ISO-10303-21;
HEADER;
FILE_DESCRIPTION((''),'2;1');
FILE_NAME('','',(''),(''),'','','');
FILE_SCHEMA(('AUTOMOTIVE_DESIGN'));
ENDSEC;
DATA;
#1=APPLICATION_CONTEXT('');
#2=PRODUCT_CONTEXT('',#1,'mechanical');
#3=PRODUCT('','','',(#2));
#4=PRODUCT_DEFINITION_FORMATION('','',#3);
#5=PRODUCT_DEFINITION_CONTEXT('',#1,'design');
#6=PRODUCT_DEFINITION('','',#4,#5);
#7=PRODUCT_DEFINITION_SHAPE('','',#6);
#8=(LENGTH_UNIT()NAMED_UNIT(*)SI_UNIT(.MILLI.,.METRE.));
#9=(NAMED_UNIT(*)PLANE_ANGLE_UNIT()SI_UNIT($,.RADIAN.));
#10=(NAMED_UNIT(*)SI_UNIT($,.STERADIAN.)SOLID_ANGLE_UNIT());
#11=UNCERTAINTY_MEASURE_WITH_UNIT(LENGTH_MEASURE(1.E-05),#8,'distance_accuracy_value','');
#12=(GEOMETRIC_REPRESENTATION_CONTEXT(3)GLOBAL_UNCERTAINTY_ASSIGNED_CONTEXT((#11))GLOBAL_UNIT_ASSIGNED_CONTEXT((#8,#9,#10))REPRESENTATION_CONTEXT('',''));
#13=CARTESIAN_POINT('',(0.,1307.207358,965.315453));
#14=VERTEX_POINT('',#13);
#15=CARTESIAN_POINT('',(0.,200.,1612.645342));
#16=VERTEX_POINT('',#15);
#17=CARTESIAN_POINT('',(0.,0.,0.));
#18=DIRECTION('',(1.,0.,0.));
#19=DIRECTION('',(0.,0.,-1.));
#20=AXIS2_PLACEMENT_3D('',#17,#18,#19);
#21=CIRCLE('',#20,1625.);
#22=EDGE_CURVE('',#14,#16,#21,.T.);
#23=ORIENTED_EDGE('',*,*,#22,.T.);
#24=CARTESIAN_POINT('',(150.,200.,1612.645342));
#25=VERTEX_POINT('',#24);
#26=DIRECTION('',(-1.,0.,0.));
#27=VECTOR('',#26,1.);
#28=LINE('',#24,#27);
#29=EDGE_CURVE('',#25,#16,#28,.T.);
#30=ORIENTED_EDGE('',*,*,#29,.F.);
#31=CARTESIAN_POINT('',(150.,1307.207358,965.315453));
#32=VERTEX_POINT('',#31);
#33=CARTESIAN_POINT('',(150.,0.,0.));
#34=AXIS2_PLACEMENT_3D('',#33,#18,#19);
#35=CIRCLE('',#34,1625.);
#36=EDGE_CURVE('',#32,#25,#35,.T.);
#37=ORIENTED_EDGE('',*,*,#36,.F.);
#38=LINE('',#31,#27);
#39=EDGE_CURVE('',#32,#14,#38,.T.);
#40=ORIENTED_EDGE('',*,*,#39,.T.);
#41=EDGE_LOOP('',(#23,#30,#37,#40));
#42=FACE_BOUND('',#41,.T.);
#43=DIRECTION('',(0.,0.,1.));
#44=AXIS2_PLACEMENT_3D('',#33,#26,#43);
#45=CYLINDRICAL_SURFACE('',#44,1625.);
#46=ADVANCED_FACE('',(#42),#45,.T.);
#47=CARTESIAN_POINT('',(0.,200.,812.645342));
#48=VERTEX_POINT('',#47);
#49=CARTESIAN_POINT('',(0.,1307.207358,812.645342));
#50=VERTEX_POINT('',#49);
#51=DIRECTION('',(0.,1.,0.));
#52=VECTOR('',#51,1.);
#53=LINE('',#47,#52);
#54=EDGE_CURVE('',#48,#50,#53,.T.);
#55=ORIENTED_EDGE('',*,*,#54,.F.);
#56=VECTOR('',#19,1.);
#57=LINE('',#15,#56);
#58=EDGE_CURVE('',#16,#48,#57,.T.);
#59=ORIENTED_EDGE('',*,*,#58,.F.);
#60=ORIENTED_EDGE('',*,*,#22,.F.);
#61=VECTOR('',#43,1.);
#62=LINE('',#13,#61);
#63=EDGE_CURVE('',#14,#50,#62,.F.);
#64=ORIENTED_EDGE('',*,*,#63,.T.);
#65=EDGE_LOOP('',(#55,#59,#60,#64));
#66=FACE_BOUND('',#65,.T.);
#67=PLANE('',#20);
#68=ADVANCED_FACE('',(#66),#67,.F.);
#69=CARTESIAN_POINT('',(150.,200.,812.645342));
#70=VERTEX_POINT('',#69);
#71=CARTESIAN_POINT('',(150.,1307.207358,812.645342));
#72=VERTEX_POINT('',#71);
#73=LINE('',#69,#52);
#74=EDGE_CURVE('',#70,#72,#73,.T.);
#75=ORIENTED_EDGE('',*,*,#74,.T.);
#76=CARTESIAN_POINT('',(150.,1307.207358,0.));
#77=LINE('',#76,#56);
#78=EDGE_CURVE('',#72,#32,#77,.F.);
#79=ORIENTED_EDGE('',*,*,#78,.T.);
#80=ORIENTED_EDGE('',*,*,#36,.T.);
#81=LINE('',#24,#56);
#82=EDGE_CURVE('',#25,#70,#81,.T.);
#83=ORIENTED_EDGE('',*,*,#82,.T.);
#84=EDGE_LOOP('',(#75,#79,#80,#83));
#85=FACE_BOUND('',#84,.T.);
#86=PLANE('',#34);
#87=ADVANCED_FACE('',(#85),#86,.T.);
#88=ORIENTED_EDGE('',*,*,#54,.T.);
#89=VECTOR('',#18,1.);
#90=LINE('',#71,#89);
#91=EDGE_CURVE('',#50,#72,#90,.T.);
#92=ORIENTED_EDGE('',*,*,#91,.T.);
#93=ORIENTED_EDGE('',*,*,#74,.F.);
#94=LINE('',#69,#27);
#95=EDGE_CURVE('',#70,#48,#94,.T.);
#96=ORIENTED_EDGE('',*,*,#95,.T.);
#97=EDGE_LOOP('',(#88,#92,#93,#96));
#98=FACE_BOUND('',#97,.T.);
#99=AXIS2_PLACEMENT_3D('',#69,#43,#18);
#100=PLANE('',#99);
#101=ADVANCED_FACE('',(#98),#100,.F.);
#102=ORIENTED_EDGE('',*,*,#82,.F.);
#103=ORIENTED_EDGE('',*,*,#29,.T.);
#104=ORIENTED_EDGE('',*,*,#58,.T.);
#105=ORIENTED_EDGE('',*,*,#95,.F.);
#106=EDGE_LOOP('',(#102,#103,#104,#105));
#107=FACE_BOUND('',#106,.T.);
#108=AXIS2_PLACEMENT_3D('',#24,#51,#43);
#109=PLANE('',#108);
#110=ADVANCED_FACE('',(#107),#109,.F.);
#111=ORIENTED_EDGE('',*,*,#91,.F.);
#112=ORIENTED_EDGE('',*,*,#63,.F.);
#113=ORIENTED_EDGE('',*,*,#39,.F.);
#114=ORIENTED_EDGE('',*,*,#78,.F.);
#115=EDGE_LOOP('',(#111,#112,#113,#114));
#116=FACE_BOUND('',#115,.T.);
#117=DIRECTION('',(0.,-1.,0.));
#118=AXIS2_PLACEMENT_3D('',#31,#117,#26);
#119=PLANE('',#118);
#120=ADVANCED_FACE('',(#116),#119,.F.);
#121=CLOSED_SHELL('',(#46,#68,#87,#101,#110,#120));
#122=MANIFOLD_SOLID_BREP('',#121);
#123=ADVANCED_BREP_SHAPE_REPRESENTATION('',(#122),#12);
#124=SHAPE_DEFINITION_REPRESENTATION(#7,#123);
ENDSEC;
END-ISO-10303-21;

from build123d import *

# Parameters (mm, degrees)
EXTRUDE_1_DEPTH     = 150
CHAMFER_START       = 1307.207357733
CHAMFER_1_OUTLINE_W = 152
CHAMFER_1_OUTLINE_H = 156
CHAMFER_1_DEPTH     = 100.792642267


with BuildPart() as part:
    # Эскиз1 → Бобышка-Вытянуть1 (new body)
    with BuildSketch(Plane(origin=(0, 0, 0), x_dir=(0, 0, -1), z_dir=(1, 0, 0))):
        with BuildLine():
            Line((-1612.645342287, 200), (-812.645342287, 200))
            Line((-812.645342287, 200), (-812.645342287, 1407.207357733))
            ThreePointArc((-812.645342287, 1407.207357733), (-1354.564921778, 897.651866086), (-1612.645342287, 200))
        make_face()
    extrude(amount=EXTRUDE_1_DEPTH)

    # Фаска1: read off the stored shape, not the designer's step
    # Фаска1 outline → Фаска1 (cut)
    with BuildSketch(Plane(origin=(0, 0, 0), x_dir=(1, 0, 0), z_dir=(0, 1, 0)).offset(CHAMFER_START)):
        with Locations((75, -889)):
            Rectangle(CHAMFER_1_OUTLINE_W, CHAMFER_1_OUTLINE_H)
    extrude(amount=CHAMFER_1_DEPTH, mode=Mode.SUBTRACT)


solid = part.part
